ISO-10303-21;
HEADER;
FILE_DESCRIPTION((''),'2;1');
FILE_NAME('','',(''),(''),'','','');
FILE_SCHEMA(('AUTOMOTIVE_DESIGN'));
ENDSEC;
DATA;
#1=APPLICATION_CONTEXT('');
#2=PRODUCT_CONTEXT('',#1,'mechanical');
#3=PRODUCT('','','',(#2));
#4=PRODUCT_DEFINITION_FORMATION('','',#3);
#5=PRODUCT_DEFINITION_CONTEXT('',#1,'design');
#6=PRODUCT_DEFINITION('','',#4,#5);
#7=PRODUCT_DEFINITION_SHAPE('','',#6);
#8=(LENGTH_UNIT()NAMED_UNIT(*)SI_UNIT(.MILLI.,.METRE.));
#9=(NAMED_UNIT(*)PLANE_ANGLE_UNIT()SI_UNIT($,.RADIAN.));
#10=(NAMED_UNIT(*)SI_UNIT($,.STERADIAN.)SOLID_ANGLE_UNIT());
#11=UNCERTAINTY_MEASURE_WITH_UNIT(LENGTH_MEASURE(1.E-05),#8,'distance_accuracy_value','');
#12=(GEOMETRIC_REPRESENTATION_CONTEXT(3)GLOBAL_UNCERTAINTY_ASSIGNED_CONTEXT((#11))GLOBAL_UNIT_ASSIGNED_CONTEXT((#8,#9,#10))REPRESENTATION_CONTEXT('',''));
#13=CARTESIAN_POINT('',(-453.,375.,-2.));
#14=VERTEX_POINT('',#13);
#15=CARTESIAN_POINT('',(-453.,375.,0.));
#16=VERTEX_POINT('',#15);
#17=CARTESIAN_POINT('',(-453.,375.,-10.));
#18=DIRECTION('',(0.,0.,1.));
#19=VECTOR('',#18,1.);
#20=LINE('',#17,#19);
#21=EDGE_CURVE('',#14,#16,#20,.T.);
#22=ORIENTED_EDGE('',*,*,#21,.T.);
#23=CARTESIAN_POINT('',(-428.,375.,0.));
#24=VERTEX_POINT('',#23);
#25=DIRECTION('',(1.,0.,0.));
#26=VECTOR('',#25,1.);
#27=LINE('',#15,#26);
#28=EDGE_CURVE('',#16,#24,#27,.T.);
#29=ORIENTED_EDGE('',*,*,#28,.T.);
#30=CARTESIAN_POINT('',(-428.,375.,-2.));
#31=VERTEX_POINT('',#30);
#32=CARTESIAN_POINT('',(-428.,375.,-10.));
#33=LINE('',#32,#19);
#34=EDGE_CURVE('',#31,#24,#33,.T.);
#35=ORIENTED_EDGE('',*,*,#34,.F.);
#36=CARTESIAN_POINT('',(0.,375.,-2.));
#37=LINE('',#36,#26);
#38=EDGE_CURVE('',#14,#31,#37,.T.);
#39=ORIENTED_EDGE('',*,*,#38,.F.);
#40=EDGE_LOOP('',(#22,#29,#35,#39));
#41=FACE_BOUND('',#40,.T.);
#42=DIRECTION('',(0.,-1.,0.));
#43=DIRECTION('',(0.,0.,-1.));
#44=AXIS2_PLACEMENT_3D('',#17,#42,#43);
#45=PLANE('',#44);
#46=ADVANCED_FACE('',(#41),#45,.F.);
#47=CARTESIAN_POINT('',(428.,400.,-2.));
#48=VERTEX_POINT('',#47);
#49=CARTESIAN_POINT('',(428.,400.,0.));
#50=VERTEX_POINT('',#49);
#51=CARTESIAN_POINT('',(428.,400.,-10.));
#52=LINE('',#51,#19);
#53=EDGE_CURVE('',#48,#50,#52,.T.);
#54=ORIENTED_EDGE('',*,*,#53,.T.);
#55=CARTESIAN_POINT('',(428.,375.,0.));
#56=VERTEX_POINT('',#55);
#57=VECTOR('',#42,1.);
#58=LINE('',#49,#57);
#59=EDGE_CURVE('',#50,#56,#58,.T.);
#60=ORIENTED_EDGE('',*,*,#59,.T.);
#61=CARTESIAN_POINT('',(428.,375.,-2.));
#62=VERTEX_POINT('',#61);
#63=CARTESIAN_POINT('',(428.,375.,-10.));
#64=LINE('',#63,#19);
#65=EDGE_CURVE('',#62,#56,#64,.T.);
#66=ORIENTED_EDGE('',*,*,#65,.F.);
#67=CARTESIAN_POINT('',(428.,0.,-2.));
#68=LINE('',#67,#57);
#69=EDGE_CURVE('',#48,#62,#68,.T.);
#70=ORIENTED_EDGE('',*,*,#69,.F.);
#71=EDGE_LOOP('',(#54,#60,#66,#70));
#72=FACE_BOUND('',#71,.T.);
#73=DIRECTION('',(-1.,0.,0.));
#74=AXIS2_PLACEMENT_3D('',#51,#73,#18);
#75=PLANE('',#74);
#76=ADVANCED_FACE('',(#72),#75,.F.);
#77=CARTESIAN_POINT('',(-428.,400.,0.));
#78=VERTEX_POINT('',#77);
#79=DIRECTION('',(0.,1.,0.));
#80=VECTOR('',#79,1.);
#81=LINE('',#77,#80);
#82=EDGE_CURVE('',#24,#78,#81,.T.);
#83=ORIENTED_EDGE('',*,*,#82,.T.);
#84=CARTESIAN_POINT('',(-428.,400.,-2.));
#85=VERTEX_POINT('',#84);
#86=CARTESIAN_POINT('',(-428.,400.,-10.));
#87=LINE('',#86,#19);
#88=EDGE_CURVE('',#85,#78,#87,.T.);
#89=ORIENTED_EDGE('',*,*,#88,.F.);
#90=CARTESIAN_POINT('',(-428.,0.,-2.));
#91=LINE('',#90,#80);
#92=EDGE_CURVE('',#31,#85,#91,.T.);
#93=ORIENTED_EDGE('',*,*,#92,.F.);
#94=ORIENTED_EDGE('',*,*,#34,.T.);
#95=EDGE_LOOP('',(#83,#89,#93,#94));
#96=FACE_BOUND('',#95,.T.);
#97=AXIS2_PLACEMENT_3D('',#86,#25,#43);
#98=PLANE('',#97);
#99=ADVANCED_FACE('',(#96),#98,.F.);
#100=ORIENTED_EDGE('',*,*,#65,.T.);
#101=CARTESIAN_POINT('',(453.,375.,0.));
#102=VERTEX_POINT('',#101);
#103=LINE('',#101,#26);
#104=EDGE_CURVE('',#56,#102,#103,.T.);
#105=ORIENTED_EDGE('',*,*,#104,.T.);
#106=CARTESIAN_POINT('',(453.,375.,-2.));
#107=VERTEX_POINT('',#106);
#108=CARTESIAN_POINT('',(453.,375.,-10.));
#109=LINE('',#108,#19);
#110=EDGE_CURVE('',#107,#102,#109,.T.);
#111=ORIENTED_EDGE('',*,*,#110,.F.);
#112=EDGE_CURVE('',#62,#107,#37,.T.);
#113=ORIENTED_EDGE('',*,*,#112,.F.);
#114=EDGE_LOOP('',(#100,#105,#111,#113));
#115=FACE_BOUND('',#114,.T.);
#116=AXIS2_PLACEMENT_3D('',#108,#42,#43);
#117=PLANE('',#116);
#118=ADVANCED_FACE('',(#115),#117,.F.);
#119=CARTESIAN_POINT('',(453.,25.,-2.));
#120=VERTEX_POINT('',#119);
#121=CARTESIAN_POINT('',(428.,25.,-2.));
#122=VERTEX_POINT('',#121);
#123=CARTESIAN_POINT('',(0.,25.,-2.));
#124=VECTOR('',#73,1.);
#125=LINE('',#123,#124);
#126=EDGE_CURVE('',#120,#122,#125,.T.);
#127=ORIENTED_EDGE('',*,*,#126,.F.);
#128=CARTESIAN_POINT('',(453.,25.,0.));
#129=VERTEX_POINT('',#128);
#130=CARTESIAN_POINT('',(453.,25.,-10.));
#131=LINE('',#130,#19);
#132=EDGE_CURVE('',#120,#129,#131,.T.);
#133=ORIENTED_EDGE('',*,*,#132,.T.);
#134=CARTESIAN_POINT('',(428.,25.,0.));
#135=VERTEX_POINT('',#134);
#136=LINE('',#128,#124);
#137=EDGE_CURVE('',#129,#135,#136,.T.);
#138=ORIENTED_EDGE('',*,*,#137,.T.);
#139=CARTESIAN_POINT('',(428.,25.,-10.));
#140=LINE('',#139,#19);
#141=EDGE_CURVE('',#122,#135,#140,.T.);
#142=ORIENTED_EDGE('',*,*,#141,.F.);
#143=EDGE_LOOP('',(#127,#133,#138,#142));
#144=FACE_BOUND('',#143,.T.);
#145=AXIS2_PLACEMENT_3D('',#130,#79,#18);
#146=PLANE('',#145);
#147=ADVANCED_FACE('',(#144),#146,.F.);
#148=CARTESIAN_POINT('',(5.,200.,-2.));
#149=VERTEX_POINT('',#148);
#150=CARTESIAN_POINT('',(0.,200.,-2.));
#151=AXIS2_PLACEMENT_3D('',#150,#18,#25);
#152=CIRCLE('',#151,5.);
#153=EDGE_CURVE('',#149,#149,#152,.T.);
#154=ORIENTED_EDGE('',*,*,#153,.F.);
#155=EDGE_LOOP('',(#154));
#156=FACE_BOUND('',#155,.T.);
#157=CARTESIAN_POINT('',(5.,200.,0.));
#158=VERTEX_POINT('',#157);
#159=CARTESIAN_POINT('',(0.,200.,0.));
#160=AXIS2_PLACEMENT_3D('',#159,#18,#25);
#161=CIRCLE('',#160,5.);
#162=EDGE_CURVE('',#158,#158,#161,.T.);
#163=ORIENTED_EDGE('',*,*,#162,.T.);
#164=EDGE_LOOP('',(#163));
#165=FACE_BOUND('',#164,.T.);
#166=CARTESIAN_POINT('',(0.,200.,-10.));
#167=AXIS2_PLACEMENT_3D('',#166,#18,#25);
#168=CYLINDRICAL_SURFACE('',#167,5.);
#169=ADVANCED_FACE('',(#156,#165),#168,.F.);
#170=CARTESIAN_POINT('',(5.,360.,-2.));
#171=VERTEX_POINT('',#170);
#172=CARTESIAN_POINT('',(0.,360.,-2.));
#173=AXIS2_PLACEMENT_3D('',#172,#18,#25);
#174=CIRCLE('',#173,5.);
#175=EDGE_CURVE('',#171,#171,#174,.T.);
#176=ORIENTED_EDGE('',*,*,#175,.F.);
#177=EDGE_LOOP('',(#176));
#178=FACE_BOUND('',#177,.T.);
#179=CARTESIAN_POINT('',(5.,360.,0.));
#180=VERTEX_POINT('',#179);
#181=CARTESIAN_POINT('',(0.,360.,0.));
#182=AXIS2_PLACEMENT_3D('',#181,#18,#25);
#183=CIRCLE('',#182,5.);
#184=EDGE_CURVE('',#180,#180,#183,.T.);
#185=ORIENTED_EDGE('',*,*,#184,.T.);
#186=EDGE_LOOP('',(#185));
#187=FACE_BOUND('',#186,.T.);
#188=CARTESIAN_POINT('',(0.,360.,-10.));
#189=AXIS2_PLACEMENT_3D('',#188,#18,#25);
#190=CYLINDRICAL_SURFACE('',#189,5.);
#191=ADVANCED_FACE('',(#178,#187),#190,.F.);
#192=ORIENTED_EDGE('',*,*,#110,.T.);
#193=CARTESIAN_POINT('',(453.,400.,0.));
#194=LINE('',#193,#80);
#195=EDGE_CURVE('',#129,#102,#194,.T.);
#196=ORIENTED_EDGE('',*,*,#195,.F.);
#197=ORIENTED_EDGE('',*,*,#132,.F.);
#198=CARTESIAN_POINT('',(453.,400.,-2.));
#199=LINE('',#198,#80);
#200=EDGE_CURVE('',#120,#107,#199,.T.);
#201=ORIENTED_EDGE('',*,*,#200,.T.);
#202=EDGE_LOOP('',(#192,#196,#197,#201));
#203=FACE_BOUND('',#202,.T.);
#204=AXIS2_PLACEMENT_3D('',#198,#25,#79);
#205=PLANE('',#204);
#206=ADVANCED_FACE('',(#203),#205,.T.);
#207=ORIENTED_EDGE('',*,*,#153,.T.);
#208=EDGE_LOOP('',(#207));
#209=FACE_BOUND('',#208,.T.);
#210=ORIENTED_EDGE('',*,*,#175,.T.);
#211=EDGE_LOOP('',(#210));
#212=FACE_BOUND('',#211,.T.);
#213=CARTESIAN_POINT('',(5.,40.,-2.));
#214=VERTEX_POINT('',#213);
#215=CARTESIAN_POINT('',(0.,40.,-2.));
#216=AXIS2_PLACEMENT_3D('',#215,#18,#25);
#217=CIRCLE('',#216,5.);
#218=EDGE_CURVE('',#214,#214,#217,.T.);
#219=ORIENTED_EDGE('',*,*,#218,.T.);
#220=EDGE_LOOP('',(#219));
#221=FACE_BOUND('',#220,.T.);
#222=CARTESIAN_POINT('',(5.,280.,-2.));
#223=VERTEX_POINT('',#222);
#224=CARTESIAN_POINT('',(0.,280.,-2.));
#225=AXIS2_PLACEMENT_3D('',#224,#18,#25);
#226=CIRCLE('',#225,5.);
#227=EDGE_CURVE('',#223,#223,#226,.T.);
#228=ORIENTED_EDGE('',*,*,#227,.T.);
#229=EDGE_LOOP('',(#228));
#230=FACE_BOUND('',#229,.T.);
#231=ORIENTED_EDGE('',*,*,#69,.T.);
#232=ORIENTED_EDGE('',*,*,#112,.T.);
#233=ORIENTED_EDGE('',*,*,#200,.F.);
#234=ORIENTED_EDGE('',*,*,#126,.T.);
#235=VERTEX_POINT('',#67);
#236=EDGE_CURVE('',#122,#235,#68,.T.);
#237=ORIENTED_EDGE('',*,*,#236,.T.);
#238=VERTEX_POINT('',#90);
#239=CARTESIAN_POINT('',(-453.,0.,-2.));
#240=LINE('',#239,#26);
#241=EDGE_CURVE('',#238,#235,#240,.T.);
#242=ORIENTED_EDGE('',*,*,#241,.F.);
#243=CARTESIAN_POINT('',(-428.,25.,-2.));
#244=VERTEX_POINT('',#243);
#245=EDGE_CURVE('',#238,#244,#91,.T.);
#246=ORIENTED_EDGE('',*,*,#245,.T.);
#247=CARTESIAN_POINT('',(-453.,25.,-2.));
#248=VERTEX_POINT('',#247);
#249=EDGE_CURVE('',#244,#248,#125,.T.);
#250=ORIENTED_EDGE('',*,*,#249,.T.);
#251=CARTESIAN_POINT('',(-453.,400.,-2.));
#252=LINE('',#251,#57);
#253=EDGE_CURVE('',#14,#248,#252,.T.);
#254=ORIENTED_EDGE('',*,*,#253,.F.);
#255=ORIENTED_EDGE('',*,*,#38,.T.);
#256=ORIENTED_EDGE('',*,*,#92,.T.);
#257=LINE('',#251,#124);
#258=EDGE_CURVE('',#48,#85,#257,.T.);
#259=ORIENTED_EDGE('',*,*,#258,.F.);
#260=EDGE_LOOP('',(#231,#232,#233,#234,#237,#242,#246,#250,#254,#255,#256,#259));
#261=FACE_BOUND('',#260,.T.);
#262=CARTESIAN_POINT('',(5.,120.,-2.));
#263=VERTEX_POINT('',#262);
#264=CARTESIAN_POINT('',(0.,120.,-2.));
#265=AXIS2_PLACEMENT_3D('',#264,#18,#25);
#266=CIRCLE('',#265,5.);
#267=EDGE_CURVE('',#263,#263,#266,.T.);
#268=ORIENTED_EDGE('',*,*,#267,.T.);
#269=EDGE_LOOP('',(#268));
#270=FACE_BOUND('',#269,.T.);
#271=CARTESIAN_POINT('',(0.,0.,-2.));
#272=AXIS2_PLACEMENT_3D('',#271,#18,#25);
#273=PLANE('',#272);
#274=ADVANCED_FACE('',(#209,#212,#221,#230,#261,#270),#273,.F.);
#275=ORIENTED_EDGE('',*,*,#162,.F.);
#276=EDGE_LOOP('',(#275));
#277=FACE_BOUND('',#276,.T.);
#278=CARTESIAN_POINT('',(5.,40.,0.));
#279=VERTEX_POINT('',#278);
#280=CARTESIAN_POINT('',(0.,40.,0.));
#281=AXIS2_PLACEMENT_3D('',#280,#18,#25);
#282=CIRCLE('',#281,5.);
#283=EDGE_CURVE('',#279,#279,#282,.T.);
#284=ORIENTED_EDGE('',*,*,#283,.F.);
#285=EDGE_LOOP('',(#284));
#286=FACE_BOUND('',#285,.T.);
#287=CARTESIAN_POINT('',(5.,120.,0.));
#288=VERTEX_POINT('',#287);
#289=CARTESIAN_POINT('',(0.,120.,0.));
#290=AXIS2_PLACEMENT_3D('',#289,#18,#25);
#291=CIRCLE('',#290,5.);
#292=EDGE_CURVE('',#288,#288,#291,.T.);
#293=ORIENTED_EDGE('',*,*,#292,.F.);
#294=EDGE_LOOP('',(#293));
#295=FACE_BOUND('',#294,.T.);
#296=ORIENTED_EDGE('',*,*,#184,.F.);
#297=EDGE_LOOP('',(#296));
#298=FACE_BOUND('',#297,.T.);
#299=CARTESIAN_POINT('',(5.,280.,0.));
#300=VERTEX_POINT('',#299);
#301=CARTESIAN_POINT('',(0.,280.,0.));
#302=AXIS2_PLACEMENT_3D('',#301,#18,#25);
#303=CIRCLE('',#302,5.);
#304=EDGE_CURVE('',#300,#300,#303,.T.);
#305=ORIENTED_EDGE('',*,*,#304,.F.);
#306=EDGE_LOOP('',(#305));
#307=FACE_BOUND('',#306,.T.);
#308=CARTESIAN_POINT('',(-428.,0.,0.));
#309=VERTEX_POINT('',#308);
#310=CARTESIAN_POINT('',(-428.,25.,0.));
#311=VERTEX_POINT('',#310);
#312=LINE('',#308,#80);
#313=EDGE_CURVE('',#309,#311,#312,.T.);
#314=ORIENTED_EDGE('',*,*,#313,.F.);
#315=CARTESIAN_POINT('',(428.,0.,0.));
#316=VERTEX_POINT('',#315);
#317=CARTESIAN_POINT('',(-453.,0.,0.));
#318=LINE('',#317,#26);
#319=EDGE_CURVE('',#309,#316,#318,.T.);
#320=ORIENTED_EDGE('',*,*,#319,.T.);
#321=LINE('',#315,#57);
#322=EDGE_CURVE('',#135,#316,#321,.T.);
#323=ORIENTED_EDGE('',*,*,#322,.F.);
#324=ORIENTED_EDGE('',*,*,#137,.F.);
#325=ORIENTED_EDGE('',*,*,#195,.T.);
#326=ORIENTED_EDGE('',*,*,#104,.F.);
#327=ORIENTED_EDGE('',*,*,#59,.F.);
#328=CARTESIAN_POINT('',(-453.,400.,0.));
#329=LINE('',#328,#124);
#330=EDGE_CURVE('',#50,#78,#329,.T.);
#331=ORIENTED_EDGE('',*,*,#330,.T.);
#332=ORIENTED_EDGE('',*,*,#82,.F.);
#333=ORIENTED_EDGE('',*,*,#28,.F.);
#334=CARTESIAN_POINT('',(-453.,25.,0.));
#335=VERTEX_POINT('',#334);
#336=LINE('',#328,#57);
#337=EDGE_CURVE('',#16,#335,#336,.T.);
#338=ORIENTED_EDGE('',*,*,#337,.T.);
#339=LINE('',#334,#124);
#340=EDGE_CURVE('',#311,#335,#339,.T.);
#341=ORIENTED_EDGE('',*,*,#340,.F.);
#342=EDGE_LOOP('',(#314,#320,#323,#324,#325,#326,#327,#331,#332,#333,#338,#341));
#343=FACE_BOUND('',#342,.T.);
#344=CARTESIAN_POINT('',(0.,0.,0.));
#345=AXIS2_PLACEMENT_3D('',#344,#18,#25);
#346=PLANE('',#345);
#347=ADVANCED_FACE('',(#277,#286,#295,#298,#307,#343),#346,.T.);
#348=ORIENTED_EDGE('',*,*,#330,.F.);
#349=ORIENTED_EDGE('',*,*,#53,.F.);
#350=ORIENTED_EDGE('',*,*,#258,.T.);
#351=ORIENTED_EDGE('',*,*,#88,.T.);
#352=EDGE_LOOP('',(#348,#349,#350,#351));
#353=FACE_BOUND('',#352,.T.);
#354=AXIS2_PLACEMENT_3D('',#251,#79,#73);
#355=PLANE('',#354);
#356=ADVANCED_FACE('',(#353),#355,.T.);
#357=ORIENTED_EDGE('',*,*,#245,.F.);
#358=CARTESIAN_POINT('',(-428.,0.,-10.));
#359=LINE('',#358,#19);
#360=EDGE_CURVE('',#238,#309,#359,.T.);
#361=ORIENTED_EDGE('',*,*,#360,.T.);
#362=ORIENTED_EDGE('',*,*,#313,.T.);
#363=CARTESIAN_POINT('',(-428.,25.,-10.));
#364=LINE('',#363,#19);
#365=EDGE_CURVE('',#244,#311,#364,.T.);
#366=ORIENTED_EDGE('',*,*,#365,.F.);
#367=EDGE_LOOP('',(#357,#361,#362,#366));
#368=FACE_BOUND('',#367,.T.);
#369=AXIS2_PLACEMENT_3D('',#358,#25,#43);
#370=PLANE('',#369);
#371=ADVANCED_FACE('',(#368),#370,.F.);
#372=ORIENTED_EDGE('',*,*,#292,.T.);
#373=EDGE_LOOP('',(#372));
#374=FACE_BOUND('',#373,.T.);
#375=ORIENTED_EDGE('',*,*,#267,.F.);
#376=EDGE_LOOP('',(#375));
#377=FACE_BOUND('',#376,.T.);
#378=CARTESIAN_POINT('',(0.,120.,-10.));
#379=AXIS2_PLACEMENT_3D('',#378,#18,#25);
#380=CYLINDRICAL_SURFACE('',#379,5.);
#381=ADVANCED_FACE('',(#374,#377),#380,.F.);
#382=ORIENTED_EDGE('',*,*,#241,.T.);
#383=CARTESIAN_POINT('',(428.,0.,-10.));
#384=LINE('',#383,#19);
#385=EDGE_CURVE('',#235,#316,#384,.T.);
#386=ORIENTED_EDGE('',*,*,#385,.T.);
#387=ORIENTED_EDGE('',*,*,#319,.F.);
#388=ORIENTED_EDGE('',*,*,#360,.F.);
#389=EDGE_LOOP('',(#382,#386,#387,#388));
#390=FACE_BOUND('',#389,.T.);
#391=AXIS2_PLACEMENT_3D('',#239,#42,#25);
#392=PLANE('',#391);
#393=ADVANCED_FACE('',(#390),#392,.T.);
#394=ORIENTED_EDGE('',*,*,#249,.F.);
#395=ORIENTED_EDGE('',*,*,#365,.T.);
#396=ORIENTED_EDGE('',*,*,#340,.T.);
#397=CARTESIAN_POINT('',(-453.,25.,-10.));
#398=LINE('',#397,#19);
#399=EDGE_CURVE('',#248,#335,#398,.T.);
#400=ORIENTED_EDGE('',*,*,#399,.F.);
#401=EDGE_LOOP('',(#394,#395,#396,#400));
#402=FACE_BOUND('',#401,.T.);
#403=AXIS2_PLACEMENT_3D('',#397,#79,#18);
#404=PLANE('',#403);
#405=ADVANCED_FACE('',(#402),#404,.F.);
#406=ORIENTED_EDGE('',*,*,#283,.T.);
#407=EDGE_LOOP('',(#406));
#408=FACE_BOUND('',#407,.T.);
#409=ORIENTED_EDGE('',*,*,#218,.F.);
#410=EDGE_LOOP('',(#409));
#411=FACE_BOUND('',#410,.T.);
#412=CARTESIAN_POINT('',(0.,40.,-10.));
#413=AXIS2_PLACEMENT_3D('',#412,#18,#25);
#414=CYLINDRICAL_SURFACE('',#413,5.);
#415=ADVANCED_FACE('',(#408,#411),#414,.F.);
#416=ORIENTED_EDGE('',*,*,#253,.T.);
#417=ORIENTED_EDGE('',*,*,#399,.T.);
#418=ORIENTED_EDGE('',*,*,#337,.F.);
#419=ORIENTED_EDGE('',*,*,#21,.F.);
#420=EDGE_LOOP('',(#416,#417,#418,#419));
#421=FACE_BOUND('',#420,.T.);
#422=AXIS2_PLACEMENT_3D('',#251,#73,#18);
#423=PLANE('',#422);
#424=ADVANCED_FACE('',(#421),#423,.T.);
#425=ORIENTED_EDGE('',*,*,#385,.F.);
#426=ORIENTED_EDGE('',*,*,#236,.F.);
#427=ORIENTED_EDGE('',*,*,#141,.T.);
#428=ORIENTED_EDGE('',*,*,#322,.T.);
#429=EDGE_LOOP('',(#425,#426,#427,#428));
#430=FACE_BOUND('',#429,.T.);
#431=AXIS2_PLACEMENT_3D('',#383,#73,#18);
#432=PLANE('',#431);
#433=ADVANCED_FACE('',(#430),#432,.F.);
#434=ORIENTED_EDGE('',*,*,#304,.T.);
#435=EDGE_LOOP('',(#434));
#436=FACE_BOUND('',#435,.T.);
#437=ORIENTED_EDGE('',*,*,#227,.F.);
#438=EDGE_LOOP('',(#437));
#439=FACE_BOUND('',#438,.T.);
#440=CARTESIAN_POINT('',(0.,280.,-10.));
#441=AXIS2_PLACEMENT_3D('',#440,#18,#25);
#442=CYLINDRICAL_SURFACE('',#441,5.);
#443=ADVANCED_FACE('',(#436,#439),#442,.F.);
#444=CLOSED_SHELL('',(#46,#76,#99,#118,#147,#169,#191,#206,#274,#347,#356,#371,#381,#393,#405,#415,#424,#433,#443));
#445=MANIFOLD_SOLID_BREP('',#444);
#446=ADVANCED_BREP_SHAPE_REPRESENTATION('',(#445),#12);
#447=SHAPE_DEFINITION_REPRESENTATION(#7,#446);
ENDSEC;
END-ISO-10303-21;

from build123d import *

# Parameters (mm, degrees)
IZIM1_W               = 906
IZIM1_H               = 400
TABAN_FLAN_1_DEPTH    = 2
IZIM6_W               = 25
IZIM6_H               = 25
KES_EKSTR_ZYON1_DEPTH = 10
IZIM7_R               = 5
KES_EKSTR_ZYON2_DEPTH = 10


# Sheet-metal steps are written as plain solids
with BuildPart() as part:
    # Çizim1 → Taban-Flanş1 (new body)
    with BuildSketch(Plane.XY):
        with Locations((0, 200)):
            Rectangle(IZIM1_W, IZIM1_H)
    extrude(amount=-TABAN_FLAN_1_DEPTH)

    # Çizim6 → Kes-Ekstrüzyon1 (cut)
    with BuildSketch(Plane.XY):
        with Locations((-440.5, 387.5)):
            Rectangle(IZIM6_W, IZIM6_H)
        with Locations((440.5, 387.5)):
            Rectangle(IZIM6_W, IZIM6_H)
        with Locations((440.5, 12.5)):
            Rectangle(IZIM6_W, IZIM6_H)
        with Locations((-440.5, 12.5)):
            Rectangle(IZIM6_W, IZIM6_H)
    extrude(amount=-KES_EKSTR_ZYON1_DEPTH, mode=Mode.SUBTRACT)

    # Çizim7 → Kes-Ekstrüzyon2 (cut)
    with BuildSketch(Plane.XY):
        with Locations((0, 360)):
            Circle(IZIM7_R)
        with Locations((0, 280)):
            Circle(IZIM7_R)
        with Locations((0, 200)):
            Circle(IZIM7_R)
        with Locations((0, 120)):
            Circle(IZIM7_R)
        with Locations((0, 40)):
            Circle(IZIM7_R)
    extrude(amount=-KES_EKSTR_ZYON2_DEPTH, mode=Mode.SUBTRACT)


solid = part.part
